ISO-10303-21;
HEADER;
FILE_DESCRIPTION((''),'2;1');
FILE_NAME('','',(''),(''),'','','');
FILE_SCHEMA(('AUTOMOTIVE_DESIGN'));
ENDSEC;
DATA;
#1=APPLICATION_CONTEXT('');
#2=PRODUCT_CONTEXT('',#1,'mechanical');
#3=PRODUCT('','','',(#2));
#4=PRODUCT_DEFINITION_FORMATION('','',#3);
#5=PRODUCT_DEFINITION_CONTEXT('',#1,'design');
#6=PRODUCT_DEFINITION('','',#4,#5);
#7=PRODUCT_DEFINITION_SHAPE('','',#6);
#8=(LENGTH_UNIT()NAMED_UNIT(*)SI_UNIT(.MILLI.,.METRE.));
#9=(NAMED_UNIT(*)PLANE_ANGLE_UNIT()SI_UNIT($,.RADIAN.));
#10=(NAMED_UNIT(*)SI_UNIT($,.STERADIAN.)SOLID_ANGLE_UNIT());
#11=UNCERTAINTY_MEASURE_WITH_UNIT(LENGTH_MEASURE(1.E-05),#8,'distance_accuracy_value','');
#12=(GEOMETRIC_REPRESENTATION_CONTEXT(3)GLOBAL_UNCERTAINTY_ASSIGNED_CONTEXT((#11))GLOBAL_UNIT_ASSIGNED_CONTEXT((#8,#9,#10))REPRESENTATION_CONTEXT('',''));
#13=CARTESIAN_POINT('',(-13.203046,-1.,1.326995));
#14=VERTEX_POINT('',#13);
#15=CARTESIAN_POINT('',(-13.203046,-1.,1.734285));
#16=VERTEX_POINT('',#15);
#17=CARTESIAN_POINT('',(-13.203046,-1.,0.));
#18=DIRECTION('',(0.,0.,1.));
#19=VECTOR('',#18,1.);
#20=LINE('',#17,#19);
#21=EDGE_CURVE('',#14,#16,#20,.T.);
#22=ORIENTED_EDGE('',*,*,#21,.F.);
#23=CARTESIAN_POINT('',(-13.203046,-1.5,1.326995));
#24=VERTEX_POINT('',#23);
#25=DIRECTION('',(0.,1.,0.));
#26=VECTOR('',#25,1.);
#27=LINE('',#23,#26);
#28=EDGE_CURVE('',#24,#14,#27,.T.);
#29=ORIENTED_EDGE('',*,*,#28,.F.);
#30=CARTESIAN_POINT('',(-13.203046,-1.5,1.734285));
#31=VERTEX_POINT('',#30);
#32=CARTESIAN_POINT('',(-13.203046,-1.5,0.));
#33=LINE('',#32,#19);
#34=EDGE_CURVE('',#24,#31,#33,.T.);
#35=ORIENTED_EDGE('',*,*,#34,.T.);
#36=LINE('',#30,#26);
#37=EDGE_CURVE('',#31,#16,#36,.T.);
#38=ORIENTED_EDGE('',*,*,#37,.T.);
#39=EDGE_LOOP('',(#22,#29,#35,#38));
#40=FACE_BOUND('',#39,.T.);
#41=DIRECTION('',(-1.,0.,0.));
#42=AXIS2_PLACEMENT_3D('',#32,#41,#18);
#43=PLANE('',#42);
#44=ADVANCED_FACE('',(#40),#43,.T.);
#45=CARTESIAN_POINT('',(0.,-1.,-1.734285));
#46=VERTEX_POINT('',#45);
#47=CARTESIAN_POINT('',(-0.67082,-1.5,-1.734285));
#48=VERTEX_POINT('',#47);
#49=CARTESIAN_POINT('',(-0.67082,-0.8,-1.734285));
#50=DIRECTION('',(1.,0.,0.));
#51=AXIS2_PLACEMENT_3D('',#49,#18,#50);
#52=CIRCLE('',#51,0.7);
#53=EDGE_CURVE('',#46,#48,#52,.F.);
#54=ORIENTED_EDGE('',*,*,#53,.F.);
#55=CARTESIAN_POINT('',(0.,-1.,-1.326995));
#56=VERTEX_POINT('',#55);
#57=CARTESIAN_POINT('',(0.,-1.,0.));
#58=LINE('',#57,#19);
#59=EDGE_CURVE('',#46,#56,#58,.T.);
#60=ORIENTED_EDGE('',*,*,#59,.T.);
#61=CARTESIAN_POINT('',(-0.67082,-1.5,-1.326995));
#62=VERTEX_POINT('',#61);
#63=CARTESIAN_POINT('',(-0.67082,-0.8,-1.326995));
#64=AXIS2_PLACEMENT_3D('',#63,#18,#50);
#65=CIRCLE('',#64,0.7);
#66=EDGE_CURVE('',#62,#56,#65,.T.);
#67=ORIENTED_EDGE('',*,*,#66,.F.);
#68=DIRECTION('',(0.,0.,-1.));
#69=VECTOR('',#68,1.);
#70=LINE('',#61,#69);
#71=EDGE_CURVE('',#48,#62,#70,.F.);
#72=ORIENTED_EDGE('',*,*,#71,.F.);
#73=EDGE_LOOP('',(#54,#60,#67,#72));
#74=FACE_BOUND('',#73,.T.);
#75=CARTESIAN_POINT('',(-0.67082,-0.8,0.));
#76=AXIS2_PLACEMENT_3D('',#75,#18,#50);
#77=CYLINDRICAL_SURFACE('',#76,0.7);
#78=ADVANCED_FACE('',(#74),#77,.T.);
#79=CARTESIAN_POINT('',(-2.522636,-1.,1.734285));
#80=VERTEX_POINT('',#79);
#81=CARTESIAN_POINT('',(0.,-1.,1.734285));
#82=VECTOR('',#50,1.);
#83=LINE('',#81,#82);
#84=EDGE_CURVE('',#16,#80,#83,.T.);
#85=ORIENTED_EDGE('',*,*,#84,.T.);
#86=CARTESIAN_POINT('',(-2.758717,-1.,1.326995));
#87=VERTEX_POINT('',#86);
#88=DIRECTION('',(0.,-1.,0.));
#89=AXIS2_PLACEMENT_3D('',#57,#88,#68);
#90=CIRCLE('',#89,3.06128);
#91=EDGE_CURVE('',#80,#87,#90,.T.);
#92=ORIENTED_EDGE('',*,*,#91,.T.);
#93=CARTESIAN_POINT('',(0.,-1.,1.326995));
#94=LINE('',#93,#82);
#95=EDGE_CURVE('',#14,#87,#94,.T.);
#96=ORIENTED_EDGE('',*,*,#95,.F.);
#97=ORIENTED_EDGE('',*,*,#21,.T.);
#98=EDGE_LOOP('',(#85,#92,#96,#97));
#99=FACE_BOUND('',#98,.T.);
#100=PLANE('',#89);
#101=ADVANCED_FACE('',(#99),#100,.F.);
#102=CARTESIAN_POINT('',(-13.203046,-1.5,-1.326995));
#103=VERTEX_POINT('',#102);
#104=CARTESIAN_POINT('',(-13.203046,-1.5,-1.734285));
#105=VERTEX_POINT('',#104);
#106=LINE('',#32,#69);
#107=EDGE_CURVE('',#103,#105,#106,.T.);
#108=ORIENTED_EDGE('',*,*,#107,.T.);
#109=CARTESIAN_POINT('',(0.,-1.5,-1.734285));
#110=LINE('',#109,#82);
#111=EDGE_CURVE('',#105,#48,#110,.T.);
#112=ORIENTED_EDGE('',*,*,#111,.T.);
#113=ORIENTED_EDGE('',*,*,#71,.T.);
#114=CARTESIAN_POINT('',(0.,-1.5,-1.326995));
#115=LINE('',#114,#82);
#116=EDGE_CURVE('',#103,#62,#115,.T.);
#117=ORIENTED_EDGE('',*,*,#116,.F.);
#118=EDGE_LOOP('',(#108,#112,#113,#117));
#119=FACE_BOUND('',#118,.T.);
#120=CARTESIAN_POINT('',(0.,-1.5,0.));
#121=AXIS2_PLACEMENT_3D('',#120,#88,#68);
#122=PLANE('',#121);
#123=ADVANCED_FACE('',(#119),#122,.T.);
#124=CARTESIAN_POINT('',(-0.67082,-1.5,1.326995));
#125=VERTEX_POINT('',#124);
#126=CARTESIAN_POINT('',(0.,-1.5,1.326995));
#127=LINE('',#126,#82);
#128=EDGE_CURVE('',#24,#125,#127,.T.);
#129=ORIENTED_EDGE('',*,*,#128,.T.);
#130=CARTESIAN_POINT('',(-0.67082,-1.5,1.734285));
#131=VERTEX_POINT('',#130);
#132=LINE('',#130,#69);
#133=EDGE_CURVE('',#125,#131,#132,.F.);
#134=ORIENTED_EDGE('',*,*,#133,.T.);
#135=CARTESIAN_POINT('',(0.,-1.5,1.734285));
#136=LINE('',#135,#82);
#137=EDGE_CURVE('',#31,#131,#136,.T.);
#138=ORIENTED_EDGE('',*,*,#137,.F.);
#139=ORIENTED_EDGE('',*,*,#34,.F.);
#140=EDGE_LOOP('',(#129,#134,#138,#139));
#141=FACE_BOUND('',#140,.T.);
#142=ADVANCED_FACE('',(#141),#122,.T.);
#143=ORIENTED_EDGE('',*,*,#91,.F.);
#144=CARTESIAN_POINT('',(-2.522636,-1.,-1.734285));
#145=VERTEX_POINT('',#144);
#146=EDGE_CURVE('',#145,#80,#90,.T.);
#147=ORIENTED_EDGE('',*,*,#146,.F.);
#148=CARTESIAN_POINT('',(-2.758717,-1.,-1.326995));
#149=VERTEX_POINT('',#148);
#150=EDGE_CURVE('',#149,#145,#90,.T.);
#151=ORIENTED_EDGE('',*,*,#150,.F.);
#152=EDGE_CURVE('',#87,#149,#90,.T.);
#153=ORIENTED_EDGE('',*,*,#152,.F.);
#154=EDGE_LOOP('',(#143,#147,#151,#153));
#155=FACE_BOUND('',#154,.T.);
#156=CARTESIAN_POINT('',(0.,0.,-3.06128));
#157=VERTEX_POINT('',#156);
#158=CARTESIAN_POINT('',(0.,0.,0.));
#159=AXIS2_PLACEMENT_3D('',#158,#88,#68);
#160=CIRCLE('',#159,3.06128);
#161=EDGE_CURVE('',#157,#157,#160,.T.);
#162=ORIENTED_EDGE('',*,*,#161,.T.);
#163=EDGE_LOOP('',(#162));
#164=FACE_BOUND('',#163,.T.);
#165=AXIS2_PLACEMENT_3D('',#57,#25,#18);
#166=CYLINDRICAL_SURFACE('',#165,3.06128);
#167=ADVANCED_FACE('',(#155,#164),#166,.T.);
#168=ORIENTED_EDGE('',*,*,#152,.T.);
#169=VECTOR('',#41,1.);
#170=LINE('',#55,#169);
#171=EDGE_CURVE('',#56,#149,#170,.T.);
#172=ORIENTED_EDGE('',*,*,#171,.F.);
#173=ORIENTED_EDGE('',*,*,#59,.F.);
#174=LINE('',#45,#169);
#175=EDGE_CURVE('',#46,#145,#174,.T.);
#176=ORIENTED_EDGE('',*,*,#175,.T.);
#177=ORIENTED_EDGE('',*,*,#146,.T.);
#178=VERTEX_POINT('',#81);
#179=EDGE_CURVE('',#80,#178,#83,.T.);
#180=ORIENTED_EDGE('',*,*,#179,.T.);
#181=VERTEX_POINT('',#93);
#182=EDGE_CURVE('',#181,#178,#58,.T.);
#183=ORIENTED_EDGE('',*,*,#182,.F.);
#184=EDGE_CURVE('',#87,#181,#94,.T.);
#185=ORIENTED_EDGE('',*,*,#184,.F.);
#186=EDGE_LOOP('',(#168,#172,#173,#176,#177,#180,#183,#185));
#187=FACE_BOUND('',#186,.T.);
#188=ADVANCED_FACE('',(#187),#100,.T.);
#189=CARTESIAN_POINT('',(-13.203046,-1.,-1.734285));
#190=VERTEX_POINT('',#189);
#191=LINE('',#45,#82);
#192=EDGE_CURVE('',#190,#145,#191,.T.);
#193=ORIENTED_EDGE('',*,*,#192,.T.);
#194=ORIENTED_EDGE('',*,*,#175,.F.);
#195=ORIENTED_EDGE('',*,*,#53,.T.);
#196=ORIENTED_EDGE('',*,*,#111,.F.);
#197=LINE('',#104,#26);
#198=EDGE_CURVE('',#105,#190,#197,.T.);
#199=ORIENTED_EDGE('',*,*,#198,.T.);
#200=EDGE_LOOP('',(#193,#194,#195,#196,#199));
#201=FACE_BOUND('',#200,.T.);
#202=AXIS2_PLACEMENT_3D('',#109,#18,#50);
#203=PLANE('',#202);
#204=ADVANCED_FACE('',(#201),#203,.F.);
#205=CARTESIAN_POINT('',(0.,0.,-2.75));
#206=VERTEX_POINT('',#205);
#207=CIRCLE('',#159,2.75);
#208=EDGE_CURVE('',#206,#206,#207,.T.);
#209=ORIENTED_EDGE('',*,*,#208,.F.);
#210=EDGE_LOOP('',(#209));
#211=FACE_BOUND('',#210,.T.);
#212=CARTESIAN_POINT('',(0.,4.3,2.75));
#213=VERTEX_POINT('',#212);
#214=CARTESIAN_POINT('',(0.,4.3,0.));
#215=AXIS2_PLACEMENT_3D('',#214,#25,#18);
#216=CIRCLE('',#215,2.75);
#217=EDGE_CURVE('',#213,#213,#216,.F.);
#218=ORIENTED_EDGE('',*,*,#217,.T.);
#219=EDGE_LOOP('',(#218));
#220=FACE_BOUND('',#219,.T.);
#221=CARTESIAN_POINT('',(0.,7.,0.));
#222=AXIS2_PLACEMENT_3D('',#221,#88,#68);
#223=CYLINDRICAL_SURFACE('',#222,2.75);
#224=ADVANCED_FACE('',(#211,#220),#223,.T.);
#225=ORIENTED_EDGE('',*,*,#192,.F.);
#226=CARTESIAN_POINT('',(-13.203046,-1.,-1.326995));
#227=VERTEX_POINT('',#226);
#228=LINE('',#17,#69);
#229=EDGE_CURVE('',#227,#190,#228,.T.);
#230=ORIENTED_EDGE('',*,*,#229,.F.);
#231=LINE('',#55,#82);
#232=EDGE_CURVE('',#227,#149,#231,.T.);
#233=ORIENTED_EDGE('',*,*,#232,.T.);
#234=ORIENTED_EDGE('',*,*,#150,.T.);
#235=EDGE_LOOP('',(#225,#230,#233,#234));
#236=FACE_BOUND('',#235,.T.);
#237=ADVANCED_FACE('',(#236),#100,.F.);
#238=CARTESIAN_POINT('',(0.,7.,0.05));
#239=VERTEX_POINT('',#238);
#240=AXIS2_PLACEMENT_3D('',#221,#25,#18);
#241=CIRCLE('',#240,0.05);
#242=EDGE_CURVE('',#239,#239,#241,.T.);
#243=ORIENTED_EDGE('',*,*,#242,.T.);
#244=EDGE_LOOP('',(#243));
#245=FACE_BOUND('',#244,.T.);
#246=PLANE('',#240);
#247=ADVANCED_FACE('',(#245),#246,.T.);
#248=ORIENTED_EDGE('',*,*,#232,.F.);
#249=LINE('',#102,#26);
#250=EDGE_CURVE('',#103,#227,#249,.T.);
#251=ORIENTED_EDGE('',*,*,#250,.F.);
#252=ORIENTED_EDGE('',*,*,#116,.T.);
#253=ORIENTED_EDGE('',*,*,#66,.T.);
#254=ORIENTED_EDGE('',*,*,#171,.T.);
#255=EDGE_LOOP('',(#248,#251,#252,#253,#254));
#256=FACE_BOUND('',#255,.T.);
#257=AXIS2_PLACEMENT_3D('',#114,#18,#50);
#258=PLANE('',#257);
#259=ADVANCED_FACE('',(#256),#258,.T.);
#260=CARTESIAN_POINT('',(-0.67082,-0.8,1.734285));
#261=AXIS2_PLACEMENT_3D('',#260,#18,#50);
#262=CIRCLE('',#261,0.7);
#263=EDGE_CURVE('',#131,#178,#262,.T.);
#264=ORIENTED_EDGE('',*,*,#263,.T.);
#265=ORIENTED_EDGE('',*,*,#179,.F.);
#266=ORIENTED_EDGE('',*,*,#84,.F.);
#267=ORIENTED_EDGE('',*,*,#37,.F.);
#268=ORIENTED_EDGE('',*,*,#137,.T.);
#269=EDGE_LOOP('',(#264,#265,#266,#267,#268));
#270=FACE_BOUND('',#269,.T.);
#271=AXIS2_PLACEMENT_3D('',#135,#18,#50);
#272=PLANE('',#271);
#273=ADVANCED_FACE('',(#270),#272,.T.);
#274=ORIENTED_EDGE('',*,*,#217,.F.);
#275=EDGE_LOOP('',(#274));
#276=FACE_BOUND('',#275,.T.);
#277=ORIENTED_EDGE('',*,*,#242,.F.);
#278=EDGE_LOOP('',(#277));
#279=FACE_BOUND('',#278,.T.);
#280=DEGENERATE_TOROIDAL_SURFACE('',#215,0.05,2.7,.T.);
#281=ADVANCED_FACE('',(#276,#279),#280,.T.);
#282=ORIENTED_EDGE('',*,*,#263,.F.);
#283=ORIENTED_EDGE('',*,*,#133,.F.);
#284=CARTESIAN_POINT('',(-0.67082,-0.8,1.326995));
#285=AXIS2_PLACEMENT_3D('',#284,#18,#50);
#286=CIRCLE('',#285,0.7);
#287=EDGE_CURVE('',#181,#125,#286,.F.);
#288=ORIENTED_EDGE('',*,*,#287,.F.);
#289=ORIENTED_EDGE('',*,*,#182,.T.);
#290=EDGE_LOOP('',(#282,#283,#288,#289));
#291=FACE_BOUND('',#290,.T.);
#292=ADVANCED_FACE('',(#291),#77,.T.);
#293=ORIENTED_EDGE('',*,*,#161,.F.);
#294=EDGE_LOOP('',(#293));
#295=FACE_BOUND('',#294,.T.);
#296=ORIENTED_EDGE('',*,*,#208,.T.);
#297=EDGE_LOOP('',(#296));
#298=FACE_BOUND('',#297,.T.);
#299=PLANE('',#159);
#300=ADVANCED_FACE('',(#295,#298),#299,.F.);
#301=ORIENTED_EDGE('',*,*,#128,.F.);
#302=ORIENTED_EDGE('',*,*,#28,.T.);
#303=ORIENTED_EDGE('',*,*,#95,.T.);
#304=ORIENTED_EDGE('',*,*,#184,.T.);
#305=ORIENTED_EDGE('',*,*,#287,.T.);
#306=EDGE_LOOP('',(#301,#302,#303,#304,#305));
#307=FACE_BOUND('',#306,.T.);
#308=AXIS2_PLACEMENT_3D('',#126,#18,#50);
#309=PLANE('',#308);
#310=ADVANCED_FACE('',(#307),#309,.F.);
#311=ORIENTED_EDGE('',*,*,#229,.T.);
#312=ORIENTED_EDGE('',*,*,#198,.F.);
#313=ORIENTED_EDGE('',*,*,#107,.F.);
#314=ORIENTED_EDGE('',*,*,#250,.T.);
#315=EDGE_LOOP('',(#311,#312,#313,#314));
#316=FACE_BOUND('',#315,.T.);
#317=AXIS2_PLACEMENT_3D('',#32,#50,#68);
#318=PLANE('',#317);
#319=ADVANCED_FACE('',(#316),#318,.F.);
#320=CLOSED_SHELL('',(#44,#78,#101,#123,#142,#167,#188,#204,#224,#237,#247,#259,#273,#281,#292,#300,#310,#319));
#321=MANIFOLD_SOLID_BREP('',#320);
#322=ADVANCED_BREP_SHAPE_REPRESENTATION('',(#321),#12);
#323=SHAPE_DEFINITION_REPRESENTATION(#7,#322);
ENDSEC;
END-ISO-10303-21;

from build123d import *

# Parameters (mm, degrees)
SKETCH1_R           = 2.75
BOSS_EXTRUDE1_DEPTH = 7
FILLET1_R           = 2.7
SKETCH2_R           = 3.061280108
BOSS_EXTRUDE2_DEPTH = 1
BOSS_EXTRUDE3_DEPTH = 0.5
FILLET2_R           = 0.7


with BuildPart() as part:
    # Sketch1 → Boss-Extrude1 (new body)
    with BuildSketch(Plane(origin=(0, 0, 0), x_dir=(1, 0, 0), z_dir=(0, 1, 0))):
        with Locations(Location((0, 0, 0), (0, 0, 270))):
            Circle(SKETCH1_R)
    extrude(amount=BOSS_EXTRUDE1_DEPTH)

    # Fillet1
    fillet1_edges = [part.edges().sort_by_distance(p)[0] for p in [
        (0, 7, -2.75),
    ]]
    fillet(fillet1_edges, radius=FILLET1_R)

    # Sketch2 → Boss-Extrude2 (add)
    with BuildSketch(Plane.XZ):
        with Locations(Location((0, 0, 0), (0, 0, 270))):
            Circle(SKETCH2_R)
    extrude(amount=BOSS_EXTRUDE2_DEPTH)

    # Sketch3 → Boss-Extrude3 (add)
    with BuildSketch(Plane.XZ.offset(1)):
        with BuildLine():
            ThreePointArc((-2.522635735, 1.734285112), (-2.648517192, 1.535184868), (-2.758717126, 1.326994996))
            Line((-2.758717126, 1.326994996), (0, 1.326994996))
            Line((0, 1.326994996), (0, 1.734285112))
            Line((0, 1.734285112), (-2.522635735, 1.734285112))
        make_face()
        with BuildLine():
            Line((-13.203045703, 1.326994996), (-2.758717126, 1.326994996))
            ThreePointArc((-2.758717126, 1.326994996), (-2.648517192, 1.535184868), (-2.522635735, 1.734285112))
            Line((-2.522635735, 1.734285112), (-13.203045703, 1.734285112))
            Line((-13.203045703, 1.734285112), (-13.203045703, 1.326994996))
        make_face()
        with BuildLine():
            Line((-2.522635735, -1.734285112), (0, -1.734285112))
            Line((0, -1.734285112), (0, -1.326994996))
            Line((0, -1.326994996), (-2.758717126, -1.326994996))
            ThreePointArc((-2.758717126, -1.326994996), (-2.648517192, -1.535184868), (-2.522635735, -1.734285112))
        make_face()
        with BuildLine():
            Line((-13.203045703, -1.734285112), (-2.522635735, -1.734285112))
            ThreePointArc((-2.522635735, -1.734285112), (-2.648517192, -1.535184868), (-2.758717126, -1.326994996))
            Line((-2.758717126, -1.326994996), (-13.203045703, -1.326994996))
            Line((-13.203045703, -1.326994996), (-13.203045703, -1.734285112))
        make_face()
    extrude(amount=BOSS_EXTRUDE3_DEPTH)

    # Fillet2
    # the kernel refuses this fillet: 0.7 mm, written as the material it takes off along each edge
    with BuildSketch(Plane(origin=(0, -1.5, -3.411336095), x_dir=(0, 1, 0), z_dir=(0, 0, 1)), Plane(origin=(0, -1.5, -0.350055987), x_dir=(0, 1, 0), z_dir=(0, 0, 1))) as fillet2_piece_1:
        with BuildLine():
            CenterArc((0.7, 0.670820393), FILLET2_R, 180, 73.398450401)
            Line((0, 0.670820393), (-0.014, 0.670820393))
            Line((-0.014, 0.670820393), (-0.014, 0))
            Line((-0.014, 0), (0, -0.014))
            ThreePointArc((0, -0.014), (0.25, -0.014), (0.496, -0.013416408))
            Line((0.496, -0.013416408), (0.5, 0))
        make_face()
    extrude(amount=3.761392082, mode=Mode.SUBTRACT)


solid = part.part
